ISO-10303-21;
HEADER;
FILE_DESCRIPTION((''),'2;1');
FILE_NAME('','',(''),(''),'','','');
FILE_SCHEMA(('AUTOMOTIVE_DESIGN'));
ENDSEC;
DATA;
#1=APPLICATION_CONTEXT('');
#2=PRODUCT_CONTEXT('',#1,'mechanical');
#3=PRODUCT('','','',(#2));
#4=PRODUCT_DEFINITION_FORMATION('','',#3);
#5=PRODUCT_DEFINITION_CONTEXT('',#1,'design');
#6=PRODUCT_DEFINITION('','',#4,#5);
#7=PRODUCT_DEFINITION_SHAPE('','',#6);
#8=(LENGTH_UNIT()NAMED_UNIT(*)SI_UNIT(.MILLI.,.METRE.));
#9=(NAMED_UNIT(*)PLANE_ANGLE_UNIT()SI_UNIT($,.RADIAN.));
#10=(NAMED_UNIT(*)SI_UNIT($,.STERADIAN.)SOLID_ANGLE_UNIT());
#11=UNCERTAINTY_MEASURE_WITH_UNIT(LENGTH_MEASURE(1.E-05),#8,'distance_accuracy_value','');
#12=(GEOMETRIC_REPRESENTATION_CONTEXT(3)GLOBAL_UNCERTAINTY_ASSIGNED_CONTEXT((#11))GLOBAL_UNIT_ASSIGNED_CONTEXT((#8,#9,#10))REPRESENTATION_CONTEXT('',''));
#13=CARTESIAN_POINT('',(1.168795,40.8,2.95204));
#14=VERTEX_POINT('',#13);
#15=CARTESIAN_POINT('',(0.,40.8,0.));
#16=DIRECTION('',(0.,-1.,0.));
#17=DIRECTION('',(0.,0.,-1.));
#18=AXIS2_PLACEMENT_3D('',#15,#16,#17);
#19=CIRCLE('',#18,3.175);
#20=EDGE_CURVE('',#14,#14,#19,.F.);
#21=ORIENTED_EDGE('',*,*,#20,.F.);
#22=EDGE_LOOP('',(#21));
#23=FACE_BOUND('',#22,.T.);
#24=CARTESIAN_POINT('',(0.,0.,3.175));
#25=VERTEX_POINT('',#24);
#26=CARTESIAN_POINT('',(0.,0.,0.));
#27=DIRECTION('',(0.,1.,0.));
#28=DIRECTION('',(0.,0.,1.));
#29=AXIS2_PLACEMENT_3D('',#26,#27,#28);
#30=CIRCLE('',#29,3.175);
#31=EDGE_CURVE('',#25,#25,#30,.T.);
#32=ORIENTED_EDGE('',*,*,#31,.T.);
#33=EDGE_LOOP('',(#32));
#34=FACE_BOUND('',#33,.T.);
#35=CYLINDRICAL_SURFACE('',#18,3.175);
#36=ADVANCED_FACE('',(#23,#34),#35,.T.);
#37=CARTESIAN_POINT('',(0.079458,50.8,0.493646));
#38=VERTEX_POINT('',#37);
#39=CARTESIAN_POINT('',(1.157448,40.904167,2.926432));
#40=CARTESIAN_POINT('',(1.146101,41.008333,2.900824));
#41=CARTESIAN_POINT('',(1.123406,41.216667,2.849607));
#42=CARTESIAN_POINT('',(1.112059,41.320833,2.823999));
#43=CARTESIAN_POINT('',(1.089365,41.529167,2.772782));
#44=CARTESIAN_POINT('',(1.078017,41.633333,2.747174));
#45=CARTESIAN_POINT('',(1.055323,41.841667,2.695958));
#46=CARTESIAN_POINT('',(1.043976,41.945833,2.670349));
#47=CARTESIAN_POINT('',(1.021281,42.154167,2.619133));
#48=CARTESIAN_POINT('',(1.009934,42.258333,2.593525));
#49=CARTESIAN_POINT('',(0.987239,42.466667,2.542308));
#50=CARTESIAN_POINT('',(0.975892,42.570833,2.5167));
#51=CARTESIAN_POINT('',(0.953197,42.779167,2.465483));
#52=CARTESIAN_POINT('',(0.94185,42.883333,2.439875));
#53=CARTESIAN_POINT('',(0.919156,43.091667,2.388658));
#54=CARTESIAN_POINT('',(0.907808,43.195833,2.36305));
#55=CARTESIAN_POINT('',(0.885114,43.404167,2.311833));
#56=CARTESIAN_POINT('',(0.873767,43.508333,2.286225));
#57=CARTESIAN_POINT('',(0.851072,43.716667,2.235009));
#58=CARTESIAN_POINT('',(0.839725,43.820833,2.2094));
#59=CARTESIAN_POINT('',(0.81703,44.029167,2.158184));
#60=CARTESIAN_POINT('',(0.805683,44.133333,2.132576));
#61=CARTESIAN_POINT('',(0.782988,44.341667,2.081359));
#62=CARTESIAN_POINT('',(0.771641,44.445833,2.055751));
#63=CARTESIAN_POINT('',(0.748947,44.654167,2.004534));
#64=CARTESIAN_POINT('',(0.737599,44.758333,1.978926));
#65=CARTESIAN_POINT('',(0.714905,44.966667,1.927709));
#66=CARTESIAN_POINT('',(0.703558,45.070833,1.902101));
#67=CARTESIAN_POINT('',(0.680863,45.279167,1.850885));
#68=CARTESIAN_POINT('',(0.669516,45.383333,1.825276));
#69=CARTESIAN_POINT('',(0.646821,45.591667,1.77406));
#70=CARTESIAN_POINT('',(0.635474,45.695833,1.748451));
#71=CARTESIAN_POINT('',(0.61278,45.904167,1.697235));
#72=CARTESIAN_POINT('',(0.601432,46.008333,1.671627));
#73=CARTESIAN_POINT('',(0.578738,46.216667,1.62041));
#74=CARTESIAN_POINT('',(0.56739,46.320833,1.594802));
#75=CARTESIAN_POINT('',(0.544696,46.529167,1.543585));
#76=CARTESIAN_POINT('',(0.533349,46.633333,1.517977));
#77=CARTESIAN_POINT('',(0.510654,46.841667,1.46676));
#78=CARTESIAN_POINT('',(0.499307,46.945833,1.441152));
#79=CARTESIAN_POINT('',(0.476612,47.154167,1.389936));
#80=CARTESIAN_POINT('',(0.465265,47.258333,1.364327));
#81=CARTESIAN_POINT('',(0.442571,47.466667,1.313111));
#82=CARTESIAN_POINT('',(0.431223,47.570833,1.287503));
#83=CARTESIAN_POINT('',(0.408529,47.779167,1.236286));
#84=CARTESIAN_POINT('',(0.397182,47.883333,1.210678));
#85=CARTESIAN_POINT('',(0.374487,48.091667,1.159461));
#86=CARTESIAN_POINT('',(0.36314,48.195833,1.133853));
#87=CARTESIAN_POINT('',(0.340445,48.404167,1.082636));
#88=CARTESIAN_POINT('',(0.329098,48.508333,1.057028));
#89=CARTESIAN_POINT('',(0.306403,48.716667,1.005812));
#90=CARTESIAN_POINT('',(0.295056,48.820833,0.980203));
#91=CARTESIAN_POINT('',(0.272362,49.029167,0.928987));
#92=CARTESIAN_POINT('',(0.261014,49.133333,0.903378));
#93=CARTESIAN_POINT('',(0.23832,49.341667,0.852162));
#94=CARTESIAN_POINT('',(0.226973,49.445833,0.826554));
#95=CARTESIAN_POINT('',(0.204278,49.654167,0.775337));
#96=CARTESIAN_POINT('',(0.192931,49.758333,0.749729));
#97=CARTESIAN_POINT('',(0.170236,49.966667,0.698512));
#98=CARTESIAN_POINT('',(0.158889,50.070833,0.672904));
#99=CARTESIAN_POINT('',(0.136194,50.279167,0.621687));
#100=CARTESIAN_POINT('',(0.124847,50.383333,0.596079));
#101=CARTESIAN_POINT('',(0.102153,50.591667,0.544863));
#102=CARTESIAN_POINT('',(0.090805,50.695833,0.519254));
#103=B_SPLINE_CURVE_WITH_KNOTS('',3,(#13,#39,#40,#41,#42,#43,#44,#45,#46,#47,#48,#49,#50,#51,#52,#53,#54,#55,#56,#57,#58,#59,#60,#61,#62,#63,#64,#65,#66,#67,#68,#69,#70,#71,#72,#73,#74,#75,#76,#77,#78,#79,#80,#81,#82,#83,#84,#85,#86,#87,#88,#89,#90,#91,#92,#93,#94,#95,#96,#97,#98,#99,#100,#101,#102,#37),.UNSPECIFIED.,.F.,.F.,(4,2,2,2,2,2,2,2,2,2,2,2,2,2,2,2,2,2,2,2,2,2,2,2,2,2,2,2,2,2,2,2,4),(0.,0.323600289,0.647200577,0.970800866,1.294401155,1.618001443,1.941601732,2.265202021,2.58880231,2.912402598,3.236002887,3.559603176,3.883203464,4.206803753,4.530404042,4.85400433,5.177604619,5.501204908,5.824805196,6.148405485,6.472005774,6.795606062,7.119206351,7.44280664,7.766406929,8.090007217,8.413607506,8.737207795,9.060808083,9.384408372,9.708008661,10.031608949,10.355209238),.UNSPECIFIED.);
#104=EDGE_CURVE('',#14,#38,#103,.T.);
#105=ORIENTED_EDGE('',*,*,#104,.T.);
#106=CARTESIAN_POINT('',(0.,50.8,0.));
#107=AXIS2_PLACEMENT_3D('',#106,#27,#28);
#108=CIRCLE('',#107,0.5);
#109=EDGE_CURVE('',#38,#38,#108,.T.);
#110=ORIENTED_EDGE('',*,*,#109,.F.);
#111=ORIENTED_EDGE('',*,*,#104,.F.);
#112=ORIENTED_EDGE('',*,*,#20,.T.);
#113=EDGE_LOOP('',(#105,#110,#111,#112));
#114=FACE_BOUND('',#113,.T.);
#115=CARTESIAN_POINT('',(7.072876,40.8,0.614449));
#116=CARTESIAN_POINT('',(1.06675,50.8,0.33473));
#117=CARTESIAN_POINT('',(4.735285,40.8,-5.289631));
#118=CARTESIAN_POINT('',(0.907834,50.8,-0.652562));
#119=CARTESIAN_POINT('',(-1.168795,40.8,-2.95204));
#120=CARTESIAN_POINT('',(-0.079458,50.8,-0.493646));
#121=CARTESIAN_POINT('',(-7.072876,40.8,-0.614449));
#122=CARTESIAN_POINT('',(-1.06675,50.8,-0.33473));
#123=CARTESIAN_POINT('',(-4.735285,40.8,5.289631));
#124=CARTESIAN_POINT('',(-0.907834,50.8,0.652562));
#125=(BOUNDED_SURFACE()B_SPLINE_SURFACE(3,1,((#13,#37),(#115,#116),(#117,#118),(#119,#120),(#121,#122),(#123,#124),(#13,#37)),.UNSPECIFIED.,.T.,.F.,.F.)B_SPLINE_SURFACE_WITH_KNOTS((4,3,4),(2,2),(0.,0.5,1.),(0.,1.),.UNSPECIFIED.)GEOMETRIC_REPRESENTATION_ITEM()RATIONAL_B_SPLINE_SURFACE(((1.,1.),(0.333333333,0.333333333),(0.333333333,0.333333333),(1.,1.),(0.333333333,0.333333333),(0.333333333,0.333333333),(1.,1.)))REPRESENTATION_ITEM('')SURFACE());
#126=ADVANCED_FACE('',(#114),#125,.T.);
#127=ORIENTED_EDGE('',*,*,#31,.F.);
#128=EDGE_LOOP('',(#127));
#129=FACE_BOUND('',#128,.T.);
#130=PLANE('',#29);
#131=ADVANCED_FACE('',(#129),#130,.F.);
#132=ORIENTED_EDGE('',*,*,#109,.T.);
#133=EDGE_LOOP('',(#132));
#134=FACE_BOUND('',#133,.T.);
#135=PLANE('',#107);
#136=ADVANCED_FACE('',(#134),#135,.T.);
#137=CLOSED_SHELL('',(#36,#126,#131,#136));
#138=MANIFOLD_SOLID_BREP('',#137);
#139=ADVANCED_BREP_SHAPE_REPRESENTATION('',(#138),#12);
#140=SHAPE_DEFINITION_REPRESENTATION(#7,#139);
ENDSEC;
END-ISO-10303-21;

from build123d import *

# Parameters (mm, degrees)
SKETCH1_R           = 3.175
BOSS_EXTRUDE1_DEPTH = 40.8


with BuildPart() as part:
    # Sketch1 → Boss-Extrude1 (new body)
    with BuildSketch(Plane(origin=(0, 0, 0), x_dir=(1, 0, 0), z_dir=(0, 1, 0))):
        with Locations(Location((0, 0, 0), (0, 0, 270))):
            Circle(SKETCH1_R)
    extrude(amount=BOSS_EXTRUDE1_DEPTH)

    # Loft1: read off the stored shape, not the designer's step
    # Loft1: loft between two sections, ruled curve by curve
    loft1_from = [
        Edge.make_bspline([(1.168795455, 40.8, 2.952040343), (7.07287614, 40.8, 0.614449433), (4.735285231, 40.8, -5.289631252), (-1.168795455, 40.8, -2.952040343), (-7.07287614, 40.8, -0.614449433), (-4.735285231, 40.8, 5.289631252), (1.168795455, 40.8, 2.952040343)], [0, 0, 0, 0, 0.5, 0.5, 0.5, 1, 1, 1, 1], 3, [1, 0.333333333, 0.333333333, 1, 0.333333333, 0.333333333, 1]),
    ]
    loft1_to = [
        Edge.make_bspline([(0.07945815, 50.8, 0.493646029), (1.066750209, 50.8, 0.33472973), (0.907833909, 50.8, -0.652562329), (-0.07945815, 50.8, -0.493646029), (-1.066750209, 50.8, -0.33472973), (-0.907833909, 50.8, 0.652562329), (0.07945815, 50.8, 0.493646029)], [0, 0, 0, 0, 0.5, 0.5, 0.5, 1, 1, 1, 1], 3, [1, 0.333333333, 0.333333333, 1, 0.333333333, 0.333333333, 1]),
    ]
    loft1 = Solid(Shell([*[Face.make_surface_from_curves(loft1_from[k], loft1_to[k]) for k in range(1)], Face(Wire(loft1_from)), Face(Wire(loft1_to))]))
    add(loft1)


solid = part.part
